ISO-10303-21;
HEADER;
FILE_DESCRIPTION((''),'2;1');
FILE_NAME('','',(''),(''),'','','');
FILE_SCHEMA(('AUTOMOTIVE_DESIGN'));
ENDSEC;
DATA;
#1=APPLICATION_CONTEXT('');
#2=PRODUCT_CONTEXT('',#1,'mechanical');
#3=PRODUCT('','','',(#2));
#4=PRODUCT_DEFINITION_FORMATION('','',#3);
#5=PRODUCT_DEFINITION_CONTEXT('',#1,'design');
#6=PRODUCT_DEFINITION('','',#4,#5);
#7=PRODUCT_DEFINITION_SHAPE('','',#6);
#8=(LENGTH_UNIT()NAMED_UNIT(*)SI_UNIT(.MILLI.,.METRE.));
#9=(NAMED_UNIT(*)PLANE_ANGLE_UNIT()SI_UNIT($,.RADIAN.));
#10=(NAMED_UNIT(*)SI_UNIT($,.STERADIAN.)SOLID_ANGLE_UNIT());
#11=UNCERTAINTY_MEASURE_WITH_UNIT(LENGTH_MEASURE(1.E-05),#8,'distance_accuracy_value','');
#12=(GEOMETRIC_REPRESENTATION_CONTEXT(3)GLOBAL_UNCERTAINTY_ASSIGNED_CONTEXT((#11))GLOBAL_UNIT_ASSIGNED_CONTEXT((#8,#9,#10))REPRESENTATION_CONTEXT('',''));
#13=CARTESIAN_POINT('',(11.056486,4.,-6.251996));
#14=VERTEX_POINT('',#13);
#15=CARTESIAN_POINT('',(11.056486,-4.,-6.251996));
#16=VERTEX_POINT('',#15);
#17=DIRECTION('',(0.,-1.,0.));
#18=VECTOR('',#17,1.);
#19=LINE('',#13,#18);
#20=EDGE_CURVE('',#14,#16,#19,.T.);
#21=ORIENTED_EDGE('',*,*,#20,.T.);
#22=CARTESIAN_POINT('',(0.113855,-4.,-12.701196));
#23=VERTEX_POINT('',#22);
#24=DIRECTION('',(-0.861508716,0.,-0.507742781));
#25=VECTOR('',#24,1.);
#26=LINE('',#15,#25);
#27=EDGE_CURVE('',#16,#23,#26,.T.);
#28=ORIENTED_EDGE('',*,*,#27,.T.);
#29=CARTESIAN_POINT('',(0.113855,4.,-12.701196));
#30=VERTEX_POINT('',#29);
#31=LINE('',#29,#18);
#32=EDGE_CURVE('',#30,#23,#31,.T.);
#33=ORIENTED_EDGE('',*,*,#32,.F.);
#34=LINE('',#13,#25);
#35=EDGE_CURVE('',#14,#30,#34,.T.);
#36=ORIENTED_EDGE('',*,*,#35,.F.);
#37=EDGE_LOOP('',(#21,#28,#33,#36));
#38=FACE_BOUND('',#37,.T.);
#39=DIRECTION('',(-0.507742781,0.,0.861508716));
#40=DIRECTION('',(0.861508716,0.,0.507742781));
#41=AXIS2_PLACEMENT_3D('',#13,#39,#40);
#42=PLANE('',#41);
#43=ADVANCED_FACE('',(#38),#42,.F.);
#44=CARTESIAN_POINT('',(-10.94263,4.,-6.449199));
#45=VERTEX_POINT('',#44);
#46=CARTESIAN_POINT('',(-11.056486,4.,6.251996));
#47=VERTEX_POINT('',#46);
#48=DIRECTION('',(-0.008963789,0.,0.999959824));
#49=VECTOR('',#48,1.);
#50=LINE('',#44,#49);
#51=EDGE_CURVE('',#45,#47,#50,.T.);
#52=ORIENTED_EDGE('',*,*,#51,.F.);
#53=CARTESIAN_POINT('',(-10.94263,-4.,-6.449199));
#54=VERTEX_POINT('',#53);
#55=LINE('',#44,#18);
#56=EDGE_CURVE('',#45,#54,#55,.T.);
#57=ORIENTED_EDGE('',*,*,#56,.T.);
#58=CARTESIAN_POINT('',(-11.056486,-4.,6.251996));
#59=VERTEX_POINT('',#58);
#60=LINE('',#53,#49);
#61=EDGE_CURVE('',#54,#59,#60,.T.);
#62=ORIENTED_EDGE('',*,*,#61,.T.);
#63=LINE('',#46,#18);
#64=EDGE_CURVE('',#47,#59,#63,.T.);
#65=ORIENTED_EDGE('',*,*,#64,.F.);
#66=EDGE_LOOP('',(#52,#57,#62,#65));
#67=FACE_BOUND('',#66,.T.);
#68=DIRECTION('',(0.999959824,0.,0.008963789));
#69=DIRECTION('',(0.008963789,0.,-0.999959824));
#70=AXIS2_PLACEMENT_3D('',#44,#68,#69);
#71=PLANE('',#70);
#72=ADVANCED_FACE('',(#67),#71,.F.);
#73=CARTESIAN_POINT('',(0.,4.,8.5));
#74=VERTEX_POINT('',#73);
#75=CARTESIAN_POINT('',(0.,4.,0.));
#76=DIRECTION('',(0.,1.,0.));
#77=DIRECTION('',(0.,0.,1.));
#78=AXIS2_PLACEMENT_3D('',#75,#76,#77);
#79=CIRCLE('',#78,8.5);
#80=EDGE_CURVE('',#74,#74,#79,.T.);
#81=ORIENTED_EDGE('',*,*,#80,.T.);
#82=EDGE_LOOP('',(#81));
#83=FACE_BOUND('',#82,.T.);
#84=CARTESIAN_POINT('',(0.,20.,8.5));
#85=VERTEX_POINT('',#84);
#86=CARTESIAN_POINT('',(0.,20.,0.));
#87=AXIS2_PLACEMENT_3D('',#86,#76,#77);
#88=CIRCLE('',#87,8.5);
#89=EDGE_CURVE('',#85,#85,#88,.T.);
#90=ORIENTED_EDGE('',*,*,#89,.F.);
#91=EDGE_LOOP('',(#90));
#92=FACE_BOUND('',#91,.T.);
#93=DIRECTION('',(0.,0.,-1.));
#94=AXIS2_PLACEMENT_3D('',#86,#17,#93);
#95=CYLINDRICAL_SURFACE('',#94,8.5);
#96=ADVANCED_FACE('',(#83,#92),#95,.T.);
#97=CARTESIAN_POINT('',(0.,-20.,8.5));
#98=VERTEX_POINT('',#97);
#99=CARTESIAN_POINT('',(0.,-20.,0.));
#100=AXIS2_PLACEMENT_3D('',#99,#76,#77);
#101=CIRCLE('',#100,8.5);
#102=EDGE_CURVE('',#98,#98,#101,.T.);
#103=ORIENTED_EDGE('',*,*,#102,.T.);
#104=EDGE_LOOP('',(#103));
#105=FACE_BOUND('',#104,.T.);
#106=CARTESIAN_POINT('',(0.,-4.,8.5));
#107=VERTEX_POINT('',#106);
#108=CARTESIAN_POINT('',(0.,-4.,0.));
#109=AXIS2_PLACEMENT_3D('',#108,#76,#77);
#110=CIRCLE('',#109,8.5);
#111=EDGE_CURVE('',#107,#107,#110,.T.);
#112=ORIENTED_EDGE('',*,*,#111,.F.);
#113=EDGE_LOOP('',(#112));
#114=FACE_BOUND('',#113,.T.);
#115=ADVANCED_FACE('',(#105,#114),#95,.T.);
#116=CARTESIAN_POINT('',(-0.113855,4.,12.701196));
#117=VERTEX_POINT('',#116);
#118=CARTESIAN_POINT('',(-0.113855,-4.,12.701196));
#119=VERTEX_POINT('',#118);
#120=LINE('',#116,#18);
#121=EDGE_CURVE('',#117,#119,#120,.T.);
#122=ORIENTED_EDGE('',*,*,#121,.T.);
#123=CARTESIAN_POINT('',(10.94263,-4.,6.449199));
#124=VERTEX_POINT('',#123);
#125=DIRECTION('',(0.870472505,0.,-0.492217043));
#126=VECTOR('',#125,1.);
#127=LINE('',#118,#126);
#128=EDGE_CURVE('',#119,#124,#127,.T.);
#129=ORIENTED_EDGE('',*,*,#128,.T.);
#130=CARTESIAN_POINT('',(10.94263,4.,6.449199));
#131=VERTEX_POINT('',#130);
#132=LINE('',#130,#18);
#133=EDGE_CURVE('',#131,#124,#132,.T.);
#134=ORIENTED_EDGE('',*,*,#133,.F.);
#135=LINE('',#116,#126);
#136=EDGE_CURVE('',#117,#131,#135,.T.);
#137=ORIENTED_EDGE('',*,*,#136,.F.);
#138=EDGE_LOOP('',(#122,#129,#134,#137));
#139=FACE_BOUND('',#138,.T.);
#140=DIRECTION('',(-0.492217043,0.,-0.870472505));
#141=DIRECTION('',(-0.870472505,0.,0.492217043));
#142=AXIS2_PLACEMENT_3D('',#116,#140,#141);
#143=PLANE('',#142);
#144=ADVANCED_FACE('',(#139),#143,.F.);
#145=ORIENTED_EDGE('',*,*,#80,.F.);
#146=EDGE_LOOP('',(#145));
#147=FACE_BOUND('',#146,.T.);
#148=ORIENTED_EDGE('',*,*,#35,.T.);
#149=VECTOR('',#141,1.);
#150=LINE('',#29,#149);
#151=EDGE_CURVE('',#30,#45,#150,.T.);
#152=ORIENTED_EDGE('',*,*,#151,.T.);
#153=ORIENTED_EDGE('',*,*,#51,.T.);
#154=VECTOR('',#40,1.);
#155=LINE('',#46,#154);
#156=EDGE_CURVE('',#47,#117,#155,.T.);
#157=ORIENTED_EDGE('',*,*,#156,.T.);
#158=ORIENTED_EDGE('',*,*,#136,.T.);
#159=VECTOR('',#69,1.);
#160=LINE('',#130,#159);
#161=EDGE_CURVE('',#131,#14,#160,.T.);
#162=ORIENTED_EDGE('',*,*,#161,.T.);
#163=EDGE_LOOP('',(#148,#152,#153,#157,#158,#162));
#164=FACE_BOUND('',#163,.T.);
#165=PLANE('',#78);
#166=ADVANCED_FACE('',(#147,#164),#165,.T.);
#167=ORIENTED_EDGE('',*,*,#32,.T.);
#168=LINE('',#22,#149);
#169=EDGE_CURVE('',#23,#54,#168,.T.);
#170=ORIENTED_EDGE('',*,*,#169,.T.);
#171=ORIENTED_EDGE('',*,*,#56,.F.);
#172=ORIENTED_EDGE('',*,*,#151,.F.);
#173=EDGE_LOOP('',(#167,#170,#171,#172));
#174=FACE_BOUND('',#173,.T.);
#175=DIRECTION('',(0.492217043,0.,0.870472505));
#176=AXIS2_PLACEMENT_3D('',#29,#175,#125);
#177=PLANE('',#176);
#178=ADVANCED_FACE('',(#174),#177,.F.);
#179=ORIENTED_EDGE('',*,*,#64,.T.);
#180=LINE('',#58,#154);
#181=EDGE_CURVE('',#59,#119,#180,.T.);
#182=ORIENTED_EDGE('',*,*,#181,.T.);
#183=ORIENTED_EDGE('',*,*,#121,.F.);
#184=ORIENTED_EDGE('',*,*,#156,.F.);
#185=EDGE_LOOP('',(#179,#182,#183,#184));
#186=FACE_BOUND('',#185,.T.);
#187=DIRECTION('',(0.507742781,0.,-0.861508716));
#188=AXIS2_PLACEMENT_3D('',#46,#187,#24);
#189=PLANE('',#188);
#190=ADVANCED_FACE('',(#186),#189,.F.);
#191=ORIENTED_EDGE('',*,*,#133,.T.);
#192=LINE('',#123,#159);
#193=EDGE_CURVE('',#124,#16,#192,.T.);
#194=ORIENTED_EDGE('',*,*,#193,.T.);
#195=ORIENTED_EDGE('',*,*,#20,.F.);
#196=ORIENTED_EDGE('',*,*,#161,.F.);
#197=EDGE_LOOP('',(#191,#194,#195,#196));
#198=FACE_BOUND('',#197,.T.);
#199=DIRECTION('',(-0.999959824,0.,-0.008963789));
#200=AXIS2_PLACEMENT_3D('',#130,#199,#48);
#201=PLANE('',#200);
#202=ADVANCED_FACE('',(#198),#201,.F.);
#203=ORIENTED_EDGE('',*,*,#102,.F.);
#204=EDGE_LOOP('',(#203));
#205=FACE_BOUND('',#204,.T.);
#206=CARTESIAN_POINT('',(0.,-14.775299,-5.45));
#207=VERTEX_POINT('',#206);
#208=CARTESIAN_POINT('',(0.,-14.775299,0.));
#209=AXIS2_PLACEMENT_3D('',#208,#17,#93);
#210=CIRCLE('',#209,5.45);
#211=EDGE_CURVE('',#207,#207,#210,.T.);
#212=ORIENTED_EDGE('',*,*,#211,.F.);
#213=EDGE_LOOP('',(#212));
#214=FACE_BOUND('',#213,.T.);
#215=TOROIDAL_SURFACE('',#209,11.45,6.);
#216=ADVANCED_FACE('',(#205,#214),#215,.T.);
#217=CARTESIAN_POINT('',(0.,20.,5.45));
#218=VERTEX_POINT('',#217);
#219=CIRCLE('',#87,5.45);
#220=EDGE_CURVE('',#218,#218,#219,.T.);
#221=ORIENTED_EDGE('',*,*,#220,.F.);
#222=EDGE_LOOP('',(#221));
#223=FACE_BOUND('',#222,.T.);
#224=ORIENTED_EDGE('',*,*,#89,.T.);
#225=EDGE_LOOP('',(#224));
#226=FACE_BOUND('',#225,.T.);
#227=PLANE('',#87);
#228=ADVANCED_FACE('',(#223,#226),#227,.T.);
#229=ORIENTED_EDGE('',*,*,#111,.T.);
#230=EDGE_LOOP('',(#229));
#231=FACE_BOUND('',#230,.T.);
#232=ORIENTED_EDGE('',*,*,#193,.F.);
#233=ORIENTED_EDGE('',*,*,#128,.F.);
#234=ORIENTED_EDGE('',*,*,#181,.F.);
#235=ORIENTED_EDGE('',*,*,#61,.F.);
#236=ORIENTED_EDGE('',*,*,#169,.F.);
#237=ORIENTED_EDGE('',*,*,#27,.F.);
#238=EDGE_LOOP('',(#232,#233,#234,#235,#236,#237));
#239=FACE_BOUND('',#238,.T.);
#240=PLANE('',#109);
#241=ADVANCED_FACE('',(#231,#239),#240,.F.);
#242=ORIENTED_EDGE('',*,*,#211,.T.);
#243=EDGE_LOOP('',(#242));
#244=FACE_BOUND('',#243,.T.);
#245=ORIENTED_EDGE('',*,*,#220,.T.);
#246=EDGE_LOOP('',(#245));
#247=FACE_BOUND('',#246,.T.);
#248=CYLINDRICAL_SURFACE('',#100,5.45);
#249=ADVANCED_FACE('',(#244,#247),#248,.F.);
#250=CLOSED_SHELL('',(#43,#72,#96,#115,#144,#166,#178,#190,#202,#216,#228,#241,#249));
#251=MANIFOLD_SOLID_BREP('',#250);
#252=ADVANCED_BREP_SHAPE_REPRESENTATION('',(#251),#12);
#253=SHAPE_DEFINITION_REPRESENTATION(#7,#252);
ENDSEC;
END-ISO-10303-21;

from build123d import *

# Parameters (mm, degrees)
SKETCH1_R               = 8.5
BOSS_EXTRUDE1_DEPTH     = 20
BOSS_EXTRUDE2_DEPTH     = 4
CUT_EXTRUDE1_DEPTH      = 44.400071981
CUT_EXTRUDE1_DEPTH_BACK = 44.400071981
SKETCH3_R               = 5.45
FILLET1_R               = 6


with BuildPart() as part:
    # Sketch1 → Boss-Extrude1 (new, symmetric)
    with BuildSketch(Plane(origin=(0, 0, 0), x_dir=(1, 0, 0), z_dir=(0, 1, 0))):
        with Locations(Location((0, 0, 0), (0, 0, 270))):
            Circle(SKETCH1_R)
    extrude(amount=BOSS_EXTRUDE1_DEPTH, both=True)

    # Sketch2 → Boss-Extrude2 (add, symmetric)
    with BuildSketch(Plane(origin=(0, 0, 0), x_dir=(1, 0, 0), z_dir=(0, 1, 0))):
        Polygon((11.056485774, 6.251996134), (0.113855411, 12.701195624), (-10.942630364, 6.44919949), (-11.056485774, -6.251996134), (-0.113855411, -12.701195624), (10.942630364, -6.44919949), align=None)
    extrude(amount=BOSS_EXTRUDE2_DEPTH, both=True)

    # Sketch3 → Cut-Extrude1 (cut, two sides: drawn at the far end of the back side and taken through both)
    with BuildSketch(Plane(origin=(0, 20, 0), x_dir=(1, 0, 0), z_dir=(0, 1, 0)).offset(-CUT_EXTRUDE1_DEPTH_BACK)):
        with Locations(Location((0, 0, 0), (0, 0, 270))):
            Circle(SKETCH3_R)
    extrude(amount=CUT_EXTRUDE1_DEPTH + CUT_EXTRUDE1_DEPTH_BACK, mode=Mode.SUBTRACT)

    # Fillet1
    # the kernel refuses this fillet: 6 mm, written as the material it takes off along each edge
    with BuildSketch(Plane(origin=(0, -20, 0), x_dir=(0, 0, 1), z_dir=(-1, 0, 0))) as fillet1_piece_1:
        with BuildLine():
            CenterArc((11.45, 5.224700948), FILLET1_R, 180, 60.549814279)
            Line((5.45, 5.224700948), (5.33, 5.224700948))
            Line((5.33, 5.224700948), (5.33, 0))
            Line((5.33, 0), (5.45, -0.12))
            ThreePointArc((5.45, -0.12), (6.975, -0.12), (8.441, -0.104494019))
            Line((8.441, -0.104494019), (8.5, 0))
        make_face()
    revolve(axis=Axis((0, -20, 0), (0, 1, 0)), mode=Mode.SUBTRACT)


solid = part.part
